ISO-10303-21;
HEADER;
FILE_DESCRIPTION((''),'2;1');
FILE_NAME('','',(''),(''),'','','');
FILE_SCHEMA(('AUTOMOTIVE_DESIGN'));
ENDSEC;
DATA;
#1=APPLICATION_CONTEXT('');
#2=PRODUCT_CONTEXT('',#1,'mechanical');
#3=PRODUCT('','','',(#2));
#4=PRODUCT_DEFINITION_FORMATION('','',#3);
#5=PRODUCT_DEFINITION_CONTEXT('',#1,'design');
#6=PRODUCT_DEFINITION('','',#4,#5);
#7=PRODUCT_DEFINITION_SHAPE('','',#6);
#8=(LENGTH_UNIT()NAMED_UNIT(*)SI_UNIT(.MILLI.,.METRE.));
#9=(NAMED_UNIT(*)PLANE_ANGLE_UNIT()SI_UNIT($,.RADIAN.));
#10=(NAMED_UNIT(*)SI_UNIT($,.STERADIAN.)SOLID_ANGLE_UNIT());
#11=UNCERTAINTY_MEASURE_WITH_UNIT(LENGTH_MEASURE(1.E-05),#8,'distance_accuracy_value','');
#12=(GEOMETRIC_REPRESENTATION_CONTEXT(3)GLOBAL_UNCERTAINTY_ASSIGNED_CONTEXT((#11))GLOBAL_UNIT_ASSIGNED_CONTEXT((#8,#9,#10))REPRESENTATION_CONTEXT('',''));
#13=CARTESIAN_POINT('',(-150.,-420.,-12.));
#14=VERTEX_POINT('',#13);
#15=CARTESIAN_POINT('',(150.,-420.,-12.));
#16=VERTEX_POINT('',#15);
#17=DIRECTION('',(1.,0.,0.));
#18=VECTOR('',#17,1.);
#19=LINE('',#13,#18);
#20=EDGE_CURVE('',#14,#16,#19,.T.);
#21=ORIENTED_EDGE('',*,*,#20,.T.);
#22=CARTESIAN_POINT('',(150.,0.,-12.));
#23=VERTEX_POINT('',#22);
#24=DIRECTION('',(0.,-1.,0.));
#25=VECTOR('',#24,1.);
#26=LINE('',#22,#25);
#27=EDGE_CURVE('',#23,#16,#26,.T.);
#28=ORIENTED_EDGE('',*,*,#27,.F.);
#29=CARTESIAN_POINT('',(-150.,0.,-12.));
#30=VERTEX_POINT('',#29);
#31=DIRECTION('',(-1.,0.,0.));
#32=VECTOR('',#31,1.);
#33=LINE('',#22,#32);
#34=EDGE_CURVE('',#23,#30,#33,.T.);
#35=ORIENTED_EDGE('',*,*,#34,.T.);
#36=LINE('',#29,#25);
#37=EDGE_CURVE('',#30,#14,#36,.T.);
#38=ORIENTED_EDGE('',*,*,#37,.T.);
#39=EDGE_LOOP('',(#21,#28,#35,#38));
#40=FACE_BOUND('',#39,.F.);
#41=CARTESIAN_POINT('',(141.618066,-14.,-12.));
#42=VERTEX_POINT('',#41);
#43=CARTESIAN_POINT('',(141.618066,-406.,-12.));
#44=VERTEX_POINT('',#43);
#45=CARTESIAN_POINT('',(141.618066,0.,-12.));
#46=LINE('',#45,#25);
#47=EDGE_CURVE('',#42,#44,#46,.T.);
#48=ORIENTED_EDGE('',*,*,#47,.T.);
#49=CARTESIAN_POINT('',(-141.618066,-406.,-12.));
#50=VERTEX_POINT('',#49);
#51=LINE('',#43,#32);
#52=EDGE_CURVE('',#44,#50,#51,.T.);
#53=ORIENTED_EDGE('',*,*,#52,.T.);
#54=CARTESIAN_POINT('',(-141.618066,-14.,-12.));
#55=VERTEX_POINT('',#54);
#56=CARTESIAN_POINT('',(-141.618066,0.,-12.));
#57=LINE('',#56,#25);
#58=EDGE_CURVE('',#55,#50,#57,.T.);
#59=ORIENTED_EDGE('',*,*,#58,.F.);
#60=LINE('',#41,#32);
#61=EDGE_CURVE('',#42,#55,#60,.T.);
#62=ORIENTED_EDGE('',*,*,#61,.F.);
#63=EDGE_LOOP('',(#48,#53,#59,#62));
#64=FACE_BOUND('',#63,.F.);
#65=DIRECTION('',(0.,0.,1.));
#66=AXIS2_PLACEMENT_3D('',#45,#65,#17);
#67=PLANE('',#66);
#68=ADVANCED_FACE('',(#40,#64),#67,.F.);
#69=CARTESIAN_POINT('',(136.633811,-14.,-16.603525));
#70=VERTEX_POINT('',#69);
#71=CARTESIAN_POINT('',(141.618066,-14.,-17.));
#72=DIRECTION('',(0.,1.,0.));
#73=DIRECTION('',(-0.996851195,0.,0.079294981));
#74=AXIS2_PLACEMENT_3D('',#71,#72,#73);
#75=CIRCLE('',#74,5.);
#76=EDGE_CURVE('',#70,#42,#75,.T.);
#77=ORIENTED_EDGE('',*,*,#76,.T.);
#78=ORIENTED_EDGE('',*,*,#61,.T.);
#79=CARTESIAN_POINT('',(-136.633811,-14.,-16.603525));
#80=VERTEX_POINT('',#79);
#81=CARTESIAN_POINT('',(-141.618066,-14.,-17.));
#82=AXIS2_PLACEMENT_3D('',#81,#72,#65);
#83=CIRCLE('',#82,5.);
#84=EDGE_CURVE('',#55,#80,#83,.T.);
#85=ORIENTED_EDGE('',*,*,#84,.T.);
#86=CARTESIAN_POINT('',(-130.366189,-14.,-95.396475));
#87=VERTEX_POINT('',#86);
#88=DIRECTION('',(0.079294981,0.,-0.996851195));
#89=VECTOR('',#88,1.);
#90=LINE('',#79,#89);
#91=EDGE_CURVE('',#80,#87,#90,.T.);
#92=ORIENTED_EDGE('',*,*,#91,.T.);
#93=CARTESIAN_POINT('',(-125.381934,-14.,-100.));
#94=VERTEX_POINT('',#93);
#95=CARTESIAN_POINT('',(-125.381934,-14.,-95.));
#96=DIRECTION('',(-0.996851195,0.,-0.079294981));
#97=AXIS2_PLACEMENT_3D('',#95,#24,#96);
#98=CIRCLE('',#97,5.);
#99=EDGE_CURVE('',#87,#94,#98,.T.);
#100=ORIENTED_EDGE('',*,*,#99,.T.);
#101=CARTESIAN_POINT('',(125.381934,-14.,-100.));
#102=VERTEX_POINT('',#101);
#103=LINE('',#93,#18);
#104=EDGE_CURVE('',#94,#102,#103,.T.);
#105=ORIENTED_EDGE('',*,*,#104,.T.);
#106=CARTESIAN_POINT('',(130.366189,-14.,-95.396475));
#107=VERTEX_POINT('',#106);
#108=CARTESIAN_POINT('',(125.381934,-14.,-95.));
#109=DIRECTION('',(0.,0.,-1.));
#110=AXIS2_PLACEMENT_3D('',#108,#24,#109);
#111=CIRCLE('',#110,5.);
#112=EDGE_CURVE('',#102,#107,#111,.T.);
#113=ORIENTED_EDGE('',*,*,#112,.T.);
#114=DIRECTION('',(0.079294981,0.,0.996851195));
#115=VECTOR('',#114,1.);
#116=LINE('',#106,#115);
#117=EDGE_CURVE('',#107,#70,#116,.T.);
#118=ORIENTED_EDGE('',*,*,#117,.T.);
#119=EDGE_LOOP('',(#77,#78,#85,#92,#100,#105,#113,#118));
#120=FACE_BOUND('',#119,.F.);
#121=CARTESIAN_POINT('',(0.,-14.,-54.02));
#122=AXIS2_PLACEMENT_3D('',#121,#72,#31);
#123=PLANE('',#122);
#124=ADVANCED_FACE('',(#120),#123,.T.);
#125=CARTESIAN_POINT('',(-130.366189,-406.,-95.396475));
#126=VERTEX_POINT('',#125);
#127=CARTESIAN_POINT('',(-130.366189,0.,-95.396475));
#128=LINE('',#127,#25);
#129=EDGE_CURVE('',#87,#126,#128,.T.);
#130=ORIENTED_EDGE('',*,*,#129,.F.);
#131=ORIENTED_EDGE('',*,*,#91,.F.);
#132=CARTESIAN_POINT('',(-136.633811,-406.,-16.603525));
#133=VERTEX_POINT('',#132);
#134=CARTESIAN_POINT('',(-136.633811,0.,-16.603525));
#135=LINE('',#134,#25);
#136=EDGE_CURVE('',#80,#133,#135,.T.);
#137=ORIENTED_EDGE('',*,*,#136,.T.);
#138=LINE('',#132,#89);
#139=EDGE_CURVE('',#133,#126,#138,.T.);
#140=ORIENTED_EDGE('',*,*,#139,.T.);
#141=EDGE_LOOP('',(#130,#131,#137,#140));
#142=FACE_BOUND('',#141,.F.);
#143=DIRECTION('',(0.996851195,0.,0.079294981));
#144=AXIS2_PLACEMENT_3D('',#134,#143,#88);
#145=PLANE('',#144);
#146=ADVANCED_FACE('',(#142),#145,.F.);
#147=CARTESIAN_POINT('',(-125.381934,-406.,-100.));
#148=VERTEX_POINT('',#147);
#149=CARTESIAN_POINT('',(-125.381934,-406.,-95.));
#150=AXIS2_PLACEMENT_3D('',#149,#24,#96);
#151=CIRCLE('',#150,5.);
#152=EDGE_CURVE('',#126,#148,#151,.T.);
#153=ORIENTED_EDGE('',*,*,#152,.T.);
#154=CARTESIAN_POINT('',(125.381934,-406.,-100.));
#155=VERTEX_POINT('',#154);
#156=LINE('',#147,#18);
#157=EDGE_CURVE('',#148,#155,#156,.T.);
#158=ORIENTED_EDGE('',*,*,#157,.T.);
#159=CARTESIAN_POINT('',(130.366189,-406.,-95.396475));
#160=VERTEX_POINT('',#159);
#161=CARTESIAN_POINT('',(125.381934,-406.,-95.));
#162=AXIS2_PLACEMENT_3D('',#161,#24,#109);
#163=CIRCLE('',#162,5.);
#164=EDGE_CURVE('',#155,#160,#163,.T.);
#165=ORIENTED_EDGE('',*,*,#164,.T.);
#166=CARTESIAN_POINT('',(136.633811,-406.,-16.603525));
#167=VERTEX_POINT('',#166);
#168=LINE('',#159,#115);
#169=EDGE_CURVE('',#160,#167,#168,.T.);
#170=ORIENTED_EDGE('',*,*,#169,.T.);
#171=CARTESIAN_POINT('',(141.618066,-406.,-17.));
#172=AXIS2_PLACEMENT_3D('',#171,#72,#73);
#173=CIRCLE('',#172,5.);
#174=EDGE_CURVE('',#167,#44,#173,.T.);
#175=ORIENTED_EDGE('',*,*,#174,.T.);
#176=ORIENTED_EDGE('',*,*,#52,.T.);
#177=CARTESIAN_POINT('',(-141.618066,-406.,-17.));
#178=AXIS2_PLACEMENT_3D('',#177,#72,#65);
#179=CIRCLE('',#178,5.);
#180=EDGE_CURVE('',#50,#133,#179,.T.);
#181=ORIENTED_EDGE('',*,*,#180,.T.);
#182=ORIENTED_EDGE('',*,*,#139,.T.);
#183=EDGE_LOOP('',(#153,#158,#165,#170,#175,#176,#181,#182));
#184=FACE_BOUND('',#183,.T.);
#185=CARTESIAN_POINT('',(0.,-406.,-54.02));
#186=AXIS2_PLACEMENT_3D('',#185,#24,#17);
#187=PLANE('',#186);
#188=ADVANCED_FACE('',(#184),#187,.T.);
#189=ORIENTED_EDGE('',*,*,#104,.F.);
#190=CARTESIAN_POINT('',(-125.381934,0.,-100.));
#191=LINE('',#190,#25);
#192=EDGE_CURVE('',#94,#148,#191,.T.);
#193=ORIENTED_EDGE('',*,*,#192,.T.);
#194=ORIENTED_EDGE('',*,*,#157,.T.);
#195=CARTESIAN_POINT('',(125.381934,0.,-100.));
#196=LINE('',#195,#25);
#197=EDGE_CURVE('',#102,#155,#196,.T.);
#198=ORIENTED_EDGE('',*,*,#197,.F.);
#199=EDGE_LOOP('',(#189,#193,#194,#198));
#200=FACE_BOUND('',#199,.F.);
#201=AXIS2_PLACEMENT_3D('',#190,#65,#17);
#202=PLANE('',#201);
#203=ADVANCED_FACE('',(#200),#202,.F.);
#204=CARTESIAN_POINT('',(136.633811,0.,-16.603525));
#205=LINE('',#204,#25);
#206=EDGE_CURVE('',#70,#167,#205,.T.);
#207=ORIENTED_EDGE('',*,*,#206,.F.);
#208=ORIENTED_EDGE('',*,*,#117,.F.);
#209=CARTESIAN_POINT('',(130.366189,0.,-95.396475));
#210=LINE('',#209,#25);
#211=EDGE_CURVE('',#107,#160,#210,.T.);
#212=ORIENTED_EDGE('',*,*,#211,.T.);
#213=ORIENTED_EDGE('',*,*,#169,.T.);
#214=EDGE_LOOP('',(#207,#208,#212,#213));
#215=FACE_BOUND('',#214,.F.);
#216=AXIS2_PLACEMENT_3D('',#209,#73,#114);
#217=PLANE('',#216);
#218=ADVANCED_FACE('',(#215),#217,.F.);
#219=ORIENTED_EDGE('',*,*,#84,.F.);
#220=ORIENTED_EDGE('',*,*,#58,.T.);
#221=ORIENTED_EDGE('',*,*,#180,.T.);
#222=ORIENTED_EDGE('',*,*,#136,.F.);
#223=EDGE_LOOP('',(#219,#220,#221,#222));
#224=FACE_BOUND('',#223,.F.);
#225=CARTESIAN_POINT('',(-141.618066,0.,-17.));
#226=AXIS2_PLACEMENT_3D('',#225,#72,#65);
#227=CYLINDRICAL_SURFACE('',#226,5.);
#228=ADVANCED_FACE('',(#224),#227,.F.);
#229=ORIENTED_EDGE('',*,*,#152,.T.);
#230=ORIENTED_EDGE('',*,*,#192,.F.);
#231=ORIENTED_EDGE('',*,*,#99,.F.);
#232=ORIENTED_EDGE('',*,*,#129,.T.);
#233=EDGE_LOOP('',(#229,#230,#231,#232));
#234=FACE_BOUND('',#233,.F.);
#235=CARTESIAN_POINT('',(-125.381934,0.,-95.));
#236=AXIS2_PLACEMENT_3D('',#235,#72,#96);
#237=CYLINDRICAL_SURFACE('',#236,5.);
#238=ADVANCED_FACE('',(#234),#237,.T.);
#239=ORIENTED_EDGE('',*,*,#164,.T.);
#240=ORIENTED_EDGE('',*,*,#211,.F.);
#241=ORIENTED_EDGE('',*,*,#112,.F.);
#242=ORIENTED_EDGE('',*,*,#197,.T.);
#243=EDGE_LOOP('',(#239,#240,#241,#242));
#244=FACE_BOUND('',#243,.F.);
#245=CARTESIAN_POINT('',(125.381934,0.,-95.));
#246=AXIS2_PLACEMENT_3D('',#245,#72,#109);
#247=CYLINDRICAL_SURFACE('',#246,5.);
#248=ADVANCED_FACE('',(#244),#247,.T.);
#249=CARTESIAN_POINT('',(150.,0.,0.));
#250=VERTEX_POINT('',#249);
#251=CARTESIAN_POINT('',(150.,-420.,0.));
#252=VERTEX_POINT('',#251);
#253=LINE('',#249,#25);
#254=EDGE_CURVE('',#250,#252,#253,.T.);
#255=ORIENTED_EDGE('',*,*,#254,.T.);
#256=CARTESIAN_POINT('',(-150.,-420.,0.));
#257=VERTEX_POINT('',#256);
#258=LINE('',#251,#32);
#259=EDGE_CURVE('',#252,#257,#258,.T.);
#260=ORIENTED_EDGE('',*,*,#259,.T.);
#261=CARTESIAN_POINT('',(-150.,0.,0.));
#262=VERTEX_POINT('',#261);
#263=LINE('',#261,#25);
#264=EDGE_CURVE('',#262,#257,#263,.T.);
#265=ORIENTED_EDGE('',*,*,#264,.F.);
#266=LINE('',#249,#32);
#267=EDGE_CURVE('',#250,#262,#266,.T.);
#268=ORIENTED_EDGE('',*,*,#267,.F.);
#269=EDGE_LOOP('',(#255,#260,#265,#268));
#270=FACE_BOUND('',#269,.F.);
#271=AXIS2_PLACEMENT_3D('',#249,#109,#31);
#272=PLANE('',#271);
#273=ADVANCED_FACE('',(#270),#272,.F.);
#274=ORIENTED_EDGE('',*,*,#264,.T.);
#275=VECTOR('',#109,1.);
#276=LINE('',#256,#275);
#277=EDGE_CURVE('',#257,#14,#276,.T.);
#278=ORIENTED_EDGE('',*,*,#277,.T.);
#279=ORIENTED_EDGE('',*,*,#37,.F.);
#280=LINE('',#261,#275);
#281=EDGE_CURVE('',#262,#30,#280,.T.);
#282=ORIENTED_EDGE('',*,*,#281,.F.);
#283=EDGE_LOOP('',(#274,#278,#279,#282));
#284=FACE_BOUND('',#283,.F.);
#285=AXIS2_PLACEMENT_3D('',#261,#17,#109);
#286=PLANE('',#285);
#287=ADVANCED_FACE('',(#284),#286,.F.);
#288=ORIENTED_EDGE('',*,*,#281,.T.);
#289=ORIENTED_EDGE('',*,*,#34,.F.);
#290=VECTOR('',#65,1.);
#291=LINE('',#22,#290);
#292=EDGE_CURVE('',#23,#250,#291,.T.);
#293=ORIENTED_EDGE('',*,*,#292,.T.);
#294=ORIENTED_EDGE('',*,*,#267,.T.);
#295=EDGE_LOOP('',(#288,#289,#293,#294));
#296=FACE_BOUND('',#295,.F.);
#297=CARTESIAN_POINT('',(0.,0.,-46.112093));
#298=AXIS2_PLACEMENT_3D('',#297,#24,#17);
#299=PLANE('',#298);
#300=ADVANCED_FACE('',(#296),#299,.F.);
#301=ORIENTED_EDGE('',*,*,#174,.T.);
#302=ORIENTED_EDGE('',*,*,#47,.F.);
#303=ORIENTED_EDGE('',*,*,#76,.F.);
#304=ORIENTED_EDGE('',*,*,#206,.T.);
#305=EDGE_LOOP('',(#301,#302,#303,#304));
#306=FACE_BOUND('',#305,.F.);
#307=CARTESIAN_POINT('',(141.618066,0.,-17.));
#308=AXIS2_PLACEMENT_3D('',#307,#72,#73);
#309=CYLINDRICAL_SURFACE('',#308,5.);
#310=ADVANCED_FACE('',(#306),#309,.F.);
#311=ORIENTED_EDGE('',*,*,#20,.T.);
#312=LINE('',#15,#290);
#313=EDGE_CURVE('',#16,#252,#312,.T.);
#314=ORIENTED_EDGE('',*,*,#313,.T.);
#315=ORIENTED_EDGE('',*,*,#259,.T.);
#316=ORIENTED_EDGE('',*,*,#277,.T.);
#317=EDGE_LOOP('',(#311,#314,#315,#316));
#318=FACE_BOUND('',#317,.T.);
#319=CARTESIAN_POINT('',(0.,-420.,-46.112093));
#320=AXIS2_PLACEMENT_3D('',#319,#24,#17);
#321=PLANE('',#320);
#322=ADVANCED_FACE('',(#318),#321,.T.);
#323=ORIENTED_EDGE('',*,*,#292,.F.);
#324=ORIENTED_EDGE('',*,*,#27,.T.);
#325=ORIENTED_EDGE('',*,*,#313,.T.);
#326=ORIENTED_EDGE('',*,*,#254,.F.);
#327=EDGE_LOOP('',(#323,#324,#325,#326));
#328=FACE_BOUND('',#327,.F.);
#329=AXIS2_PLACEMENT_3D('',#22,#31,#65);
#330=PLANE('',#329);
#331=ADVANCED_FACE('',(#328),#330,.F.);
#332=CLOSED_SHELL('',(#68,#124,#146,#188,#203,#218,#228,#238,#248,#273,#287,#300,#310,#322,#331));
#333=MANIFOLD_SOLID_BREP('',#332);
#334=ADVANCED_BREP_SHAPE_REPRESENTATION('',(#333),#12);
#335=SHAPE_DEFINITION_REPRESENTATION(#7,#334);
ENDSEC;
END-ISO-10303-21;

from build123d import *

# Parameters (mm, degrees)
F1_DEPTH = 420
F3_DEPTH = 14


# Not quite as in the source:
# - a pattern or mirror of a feature is missing from the dataset's text; its kind, count and spacing are read off the source's solid


with BuildPart() as f1:
    # F0 (on Front) → F1 (new body)
    with BuildSketch(Plane.XZ):
        with BuildLine():
            Line((150, 0), (0, 0))
            Line((0, 0), (-150, 0))
            Line((-150, 0), (-150, -12))
            Line((-150, -12), (-141.6180664814, -12))
            ThreePointArc((-141.6180664814, -12), (-138.2256023722, -13.3269648425), (-136.633810504, -16.6035250927))
            Line((-136.633810504, -16.6035250927), (-130.366189496, -95.3964749073))
            ThreePointArc((-130.366189496, -95.3964749073), (-128.7743976278, -98.6730351575), (-125.3819335186, -100))
            Line((-125.3819335186, -100), (0, -100))
            Line((0, -100), (125.3819335186, -100))
            ThreePointArc((125.3819335186, -100), (128.7743976278, -98.6730351575), (130.366189496, -95.3964749073))
            Line((130.366189496, -95.3964749073), (136.633810504, -16.6035250927))
            ThreePointArc((136.633810504, -16.6035250927), (138.2256023722, -13.3269648425), (141.6180664814, -12))
            Line((141.6180664814, -12), (150, -12))
            Line((150, -12), (150, 0))
        make_face()
    extrude(amount=F1_DEPTH)

    # F2 (on face) → F3 (cut)
    with BuildSketch(Plane.XZ.offset(420)):
        with BuildLine():
            Line((141.6180664814, -12), (-141.6180664814, -12))
            ThreePointArc((-141.6180664814, -12), (-138.2256023722, -13.3269648425), (-136.633810504, -16.6035250927))
            Line((-136.633810504, -16.6035250927), (-130.366189496, -95.3964749073))
            ThreePointArc((-130.366189496, -95.3964749073), (-128.7743976278, -98.6730351575), (-125.3819335186, -100))
            Line((-125.3819335186, -100), (125.3819335186, -100))
            ThreePointArc((125.3819335186, -100), (128.7743976278, -98.6730351575), (130.366189496, -95.3964749073))
            Line((130.366189496, -95.3964749073), (136.633810504, -16.6035250927))
            ThreePointArc((136.633810504, -16.6035250927), (138.2256023722, -13.3269648425), (141.6180664814, -12))
        make_face()
    f3 = extrude(amount=-F3_DEPTH, mode=Mode.SUBTRACT)

    # F3_copies: F3 across plane
    add(f3.mirror(Plane.ZX.offset(-210)), mode=Mode.SUBTRACT)


solid = f1.part
